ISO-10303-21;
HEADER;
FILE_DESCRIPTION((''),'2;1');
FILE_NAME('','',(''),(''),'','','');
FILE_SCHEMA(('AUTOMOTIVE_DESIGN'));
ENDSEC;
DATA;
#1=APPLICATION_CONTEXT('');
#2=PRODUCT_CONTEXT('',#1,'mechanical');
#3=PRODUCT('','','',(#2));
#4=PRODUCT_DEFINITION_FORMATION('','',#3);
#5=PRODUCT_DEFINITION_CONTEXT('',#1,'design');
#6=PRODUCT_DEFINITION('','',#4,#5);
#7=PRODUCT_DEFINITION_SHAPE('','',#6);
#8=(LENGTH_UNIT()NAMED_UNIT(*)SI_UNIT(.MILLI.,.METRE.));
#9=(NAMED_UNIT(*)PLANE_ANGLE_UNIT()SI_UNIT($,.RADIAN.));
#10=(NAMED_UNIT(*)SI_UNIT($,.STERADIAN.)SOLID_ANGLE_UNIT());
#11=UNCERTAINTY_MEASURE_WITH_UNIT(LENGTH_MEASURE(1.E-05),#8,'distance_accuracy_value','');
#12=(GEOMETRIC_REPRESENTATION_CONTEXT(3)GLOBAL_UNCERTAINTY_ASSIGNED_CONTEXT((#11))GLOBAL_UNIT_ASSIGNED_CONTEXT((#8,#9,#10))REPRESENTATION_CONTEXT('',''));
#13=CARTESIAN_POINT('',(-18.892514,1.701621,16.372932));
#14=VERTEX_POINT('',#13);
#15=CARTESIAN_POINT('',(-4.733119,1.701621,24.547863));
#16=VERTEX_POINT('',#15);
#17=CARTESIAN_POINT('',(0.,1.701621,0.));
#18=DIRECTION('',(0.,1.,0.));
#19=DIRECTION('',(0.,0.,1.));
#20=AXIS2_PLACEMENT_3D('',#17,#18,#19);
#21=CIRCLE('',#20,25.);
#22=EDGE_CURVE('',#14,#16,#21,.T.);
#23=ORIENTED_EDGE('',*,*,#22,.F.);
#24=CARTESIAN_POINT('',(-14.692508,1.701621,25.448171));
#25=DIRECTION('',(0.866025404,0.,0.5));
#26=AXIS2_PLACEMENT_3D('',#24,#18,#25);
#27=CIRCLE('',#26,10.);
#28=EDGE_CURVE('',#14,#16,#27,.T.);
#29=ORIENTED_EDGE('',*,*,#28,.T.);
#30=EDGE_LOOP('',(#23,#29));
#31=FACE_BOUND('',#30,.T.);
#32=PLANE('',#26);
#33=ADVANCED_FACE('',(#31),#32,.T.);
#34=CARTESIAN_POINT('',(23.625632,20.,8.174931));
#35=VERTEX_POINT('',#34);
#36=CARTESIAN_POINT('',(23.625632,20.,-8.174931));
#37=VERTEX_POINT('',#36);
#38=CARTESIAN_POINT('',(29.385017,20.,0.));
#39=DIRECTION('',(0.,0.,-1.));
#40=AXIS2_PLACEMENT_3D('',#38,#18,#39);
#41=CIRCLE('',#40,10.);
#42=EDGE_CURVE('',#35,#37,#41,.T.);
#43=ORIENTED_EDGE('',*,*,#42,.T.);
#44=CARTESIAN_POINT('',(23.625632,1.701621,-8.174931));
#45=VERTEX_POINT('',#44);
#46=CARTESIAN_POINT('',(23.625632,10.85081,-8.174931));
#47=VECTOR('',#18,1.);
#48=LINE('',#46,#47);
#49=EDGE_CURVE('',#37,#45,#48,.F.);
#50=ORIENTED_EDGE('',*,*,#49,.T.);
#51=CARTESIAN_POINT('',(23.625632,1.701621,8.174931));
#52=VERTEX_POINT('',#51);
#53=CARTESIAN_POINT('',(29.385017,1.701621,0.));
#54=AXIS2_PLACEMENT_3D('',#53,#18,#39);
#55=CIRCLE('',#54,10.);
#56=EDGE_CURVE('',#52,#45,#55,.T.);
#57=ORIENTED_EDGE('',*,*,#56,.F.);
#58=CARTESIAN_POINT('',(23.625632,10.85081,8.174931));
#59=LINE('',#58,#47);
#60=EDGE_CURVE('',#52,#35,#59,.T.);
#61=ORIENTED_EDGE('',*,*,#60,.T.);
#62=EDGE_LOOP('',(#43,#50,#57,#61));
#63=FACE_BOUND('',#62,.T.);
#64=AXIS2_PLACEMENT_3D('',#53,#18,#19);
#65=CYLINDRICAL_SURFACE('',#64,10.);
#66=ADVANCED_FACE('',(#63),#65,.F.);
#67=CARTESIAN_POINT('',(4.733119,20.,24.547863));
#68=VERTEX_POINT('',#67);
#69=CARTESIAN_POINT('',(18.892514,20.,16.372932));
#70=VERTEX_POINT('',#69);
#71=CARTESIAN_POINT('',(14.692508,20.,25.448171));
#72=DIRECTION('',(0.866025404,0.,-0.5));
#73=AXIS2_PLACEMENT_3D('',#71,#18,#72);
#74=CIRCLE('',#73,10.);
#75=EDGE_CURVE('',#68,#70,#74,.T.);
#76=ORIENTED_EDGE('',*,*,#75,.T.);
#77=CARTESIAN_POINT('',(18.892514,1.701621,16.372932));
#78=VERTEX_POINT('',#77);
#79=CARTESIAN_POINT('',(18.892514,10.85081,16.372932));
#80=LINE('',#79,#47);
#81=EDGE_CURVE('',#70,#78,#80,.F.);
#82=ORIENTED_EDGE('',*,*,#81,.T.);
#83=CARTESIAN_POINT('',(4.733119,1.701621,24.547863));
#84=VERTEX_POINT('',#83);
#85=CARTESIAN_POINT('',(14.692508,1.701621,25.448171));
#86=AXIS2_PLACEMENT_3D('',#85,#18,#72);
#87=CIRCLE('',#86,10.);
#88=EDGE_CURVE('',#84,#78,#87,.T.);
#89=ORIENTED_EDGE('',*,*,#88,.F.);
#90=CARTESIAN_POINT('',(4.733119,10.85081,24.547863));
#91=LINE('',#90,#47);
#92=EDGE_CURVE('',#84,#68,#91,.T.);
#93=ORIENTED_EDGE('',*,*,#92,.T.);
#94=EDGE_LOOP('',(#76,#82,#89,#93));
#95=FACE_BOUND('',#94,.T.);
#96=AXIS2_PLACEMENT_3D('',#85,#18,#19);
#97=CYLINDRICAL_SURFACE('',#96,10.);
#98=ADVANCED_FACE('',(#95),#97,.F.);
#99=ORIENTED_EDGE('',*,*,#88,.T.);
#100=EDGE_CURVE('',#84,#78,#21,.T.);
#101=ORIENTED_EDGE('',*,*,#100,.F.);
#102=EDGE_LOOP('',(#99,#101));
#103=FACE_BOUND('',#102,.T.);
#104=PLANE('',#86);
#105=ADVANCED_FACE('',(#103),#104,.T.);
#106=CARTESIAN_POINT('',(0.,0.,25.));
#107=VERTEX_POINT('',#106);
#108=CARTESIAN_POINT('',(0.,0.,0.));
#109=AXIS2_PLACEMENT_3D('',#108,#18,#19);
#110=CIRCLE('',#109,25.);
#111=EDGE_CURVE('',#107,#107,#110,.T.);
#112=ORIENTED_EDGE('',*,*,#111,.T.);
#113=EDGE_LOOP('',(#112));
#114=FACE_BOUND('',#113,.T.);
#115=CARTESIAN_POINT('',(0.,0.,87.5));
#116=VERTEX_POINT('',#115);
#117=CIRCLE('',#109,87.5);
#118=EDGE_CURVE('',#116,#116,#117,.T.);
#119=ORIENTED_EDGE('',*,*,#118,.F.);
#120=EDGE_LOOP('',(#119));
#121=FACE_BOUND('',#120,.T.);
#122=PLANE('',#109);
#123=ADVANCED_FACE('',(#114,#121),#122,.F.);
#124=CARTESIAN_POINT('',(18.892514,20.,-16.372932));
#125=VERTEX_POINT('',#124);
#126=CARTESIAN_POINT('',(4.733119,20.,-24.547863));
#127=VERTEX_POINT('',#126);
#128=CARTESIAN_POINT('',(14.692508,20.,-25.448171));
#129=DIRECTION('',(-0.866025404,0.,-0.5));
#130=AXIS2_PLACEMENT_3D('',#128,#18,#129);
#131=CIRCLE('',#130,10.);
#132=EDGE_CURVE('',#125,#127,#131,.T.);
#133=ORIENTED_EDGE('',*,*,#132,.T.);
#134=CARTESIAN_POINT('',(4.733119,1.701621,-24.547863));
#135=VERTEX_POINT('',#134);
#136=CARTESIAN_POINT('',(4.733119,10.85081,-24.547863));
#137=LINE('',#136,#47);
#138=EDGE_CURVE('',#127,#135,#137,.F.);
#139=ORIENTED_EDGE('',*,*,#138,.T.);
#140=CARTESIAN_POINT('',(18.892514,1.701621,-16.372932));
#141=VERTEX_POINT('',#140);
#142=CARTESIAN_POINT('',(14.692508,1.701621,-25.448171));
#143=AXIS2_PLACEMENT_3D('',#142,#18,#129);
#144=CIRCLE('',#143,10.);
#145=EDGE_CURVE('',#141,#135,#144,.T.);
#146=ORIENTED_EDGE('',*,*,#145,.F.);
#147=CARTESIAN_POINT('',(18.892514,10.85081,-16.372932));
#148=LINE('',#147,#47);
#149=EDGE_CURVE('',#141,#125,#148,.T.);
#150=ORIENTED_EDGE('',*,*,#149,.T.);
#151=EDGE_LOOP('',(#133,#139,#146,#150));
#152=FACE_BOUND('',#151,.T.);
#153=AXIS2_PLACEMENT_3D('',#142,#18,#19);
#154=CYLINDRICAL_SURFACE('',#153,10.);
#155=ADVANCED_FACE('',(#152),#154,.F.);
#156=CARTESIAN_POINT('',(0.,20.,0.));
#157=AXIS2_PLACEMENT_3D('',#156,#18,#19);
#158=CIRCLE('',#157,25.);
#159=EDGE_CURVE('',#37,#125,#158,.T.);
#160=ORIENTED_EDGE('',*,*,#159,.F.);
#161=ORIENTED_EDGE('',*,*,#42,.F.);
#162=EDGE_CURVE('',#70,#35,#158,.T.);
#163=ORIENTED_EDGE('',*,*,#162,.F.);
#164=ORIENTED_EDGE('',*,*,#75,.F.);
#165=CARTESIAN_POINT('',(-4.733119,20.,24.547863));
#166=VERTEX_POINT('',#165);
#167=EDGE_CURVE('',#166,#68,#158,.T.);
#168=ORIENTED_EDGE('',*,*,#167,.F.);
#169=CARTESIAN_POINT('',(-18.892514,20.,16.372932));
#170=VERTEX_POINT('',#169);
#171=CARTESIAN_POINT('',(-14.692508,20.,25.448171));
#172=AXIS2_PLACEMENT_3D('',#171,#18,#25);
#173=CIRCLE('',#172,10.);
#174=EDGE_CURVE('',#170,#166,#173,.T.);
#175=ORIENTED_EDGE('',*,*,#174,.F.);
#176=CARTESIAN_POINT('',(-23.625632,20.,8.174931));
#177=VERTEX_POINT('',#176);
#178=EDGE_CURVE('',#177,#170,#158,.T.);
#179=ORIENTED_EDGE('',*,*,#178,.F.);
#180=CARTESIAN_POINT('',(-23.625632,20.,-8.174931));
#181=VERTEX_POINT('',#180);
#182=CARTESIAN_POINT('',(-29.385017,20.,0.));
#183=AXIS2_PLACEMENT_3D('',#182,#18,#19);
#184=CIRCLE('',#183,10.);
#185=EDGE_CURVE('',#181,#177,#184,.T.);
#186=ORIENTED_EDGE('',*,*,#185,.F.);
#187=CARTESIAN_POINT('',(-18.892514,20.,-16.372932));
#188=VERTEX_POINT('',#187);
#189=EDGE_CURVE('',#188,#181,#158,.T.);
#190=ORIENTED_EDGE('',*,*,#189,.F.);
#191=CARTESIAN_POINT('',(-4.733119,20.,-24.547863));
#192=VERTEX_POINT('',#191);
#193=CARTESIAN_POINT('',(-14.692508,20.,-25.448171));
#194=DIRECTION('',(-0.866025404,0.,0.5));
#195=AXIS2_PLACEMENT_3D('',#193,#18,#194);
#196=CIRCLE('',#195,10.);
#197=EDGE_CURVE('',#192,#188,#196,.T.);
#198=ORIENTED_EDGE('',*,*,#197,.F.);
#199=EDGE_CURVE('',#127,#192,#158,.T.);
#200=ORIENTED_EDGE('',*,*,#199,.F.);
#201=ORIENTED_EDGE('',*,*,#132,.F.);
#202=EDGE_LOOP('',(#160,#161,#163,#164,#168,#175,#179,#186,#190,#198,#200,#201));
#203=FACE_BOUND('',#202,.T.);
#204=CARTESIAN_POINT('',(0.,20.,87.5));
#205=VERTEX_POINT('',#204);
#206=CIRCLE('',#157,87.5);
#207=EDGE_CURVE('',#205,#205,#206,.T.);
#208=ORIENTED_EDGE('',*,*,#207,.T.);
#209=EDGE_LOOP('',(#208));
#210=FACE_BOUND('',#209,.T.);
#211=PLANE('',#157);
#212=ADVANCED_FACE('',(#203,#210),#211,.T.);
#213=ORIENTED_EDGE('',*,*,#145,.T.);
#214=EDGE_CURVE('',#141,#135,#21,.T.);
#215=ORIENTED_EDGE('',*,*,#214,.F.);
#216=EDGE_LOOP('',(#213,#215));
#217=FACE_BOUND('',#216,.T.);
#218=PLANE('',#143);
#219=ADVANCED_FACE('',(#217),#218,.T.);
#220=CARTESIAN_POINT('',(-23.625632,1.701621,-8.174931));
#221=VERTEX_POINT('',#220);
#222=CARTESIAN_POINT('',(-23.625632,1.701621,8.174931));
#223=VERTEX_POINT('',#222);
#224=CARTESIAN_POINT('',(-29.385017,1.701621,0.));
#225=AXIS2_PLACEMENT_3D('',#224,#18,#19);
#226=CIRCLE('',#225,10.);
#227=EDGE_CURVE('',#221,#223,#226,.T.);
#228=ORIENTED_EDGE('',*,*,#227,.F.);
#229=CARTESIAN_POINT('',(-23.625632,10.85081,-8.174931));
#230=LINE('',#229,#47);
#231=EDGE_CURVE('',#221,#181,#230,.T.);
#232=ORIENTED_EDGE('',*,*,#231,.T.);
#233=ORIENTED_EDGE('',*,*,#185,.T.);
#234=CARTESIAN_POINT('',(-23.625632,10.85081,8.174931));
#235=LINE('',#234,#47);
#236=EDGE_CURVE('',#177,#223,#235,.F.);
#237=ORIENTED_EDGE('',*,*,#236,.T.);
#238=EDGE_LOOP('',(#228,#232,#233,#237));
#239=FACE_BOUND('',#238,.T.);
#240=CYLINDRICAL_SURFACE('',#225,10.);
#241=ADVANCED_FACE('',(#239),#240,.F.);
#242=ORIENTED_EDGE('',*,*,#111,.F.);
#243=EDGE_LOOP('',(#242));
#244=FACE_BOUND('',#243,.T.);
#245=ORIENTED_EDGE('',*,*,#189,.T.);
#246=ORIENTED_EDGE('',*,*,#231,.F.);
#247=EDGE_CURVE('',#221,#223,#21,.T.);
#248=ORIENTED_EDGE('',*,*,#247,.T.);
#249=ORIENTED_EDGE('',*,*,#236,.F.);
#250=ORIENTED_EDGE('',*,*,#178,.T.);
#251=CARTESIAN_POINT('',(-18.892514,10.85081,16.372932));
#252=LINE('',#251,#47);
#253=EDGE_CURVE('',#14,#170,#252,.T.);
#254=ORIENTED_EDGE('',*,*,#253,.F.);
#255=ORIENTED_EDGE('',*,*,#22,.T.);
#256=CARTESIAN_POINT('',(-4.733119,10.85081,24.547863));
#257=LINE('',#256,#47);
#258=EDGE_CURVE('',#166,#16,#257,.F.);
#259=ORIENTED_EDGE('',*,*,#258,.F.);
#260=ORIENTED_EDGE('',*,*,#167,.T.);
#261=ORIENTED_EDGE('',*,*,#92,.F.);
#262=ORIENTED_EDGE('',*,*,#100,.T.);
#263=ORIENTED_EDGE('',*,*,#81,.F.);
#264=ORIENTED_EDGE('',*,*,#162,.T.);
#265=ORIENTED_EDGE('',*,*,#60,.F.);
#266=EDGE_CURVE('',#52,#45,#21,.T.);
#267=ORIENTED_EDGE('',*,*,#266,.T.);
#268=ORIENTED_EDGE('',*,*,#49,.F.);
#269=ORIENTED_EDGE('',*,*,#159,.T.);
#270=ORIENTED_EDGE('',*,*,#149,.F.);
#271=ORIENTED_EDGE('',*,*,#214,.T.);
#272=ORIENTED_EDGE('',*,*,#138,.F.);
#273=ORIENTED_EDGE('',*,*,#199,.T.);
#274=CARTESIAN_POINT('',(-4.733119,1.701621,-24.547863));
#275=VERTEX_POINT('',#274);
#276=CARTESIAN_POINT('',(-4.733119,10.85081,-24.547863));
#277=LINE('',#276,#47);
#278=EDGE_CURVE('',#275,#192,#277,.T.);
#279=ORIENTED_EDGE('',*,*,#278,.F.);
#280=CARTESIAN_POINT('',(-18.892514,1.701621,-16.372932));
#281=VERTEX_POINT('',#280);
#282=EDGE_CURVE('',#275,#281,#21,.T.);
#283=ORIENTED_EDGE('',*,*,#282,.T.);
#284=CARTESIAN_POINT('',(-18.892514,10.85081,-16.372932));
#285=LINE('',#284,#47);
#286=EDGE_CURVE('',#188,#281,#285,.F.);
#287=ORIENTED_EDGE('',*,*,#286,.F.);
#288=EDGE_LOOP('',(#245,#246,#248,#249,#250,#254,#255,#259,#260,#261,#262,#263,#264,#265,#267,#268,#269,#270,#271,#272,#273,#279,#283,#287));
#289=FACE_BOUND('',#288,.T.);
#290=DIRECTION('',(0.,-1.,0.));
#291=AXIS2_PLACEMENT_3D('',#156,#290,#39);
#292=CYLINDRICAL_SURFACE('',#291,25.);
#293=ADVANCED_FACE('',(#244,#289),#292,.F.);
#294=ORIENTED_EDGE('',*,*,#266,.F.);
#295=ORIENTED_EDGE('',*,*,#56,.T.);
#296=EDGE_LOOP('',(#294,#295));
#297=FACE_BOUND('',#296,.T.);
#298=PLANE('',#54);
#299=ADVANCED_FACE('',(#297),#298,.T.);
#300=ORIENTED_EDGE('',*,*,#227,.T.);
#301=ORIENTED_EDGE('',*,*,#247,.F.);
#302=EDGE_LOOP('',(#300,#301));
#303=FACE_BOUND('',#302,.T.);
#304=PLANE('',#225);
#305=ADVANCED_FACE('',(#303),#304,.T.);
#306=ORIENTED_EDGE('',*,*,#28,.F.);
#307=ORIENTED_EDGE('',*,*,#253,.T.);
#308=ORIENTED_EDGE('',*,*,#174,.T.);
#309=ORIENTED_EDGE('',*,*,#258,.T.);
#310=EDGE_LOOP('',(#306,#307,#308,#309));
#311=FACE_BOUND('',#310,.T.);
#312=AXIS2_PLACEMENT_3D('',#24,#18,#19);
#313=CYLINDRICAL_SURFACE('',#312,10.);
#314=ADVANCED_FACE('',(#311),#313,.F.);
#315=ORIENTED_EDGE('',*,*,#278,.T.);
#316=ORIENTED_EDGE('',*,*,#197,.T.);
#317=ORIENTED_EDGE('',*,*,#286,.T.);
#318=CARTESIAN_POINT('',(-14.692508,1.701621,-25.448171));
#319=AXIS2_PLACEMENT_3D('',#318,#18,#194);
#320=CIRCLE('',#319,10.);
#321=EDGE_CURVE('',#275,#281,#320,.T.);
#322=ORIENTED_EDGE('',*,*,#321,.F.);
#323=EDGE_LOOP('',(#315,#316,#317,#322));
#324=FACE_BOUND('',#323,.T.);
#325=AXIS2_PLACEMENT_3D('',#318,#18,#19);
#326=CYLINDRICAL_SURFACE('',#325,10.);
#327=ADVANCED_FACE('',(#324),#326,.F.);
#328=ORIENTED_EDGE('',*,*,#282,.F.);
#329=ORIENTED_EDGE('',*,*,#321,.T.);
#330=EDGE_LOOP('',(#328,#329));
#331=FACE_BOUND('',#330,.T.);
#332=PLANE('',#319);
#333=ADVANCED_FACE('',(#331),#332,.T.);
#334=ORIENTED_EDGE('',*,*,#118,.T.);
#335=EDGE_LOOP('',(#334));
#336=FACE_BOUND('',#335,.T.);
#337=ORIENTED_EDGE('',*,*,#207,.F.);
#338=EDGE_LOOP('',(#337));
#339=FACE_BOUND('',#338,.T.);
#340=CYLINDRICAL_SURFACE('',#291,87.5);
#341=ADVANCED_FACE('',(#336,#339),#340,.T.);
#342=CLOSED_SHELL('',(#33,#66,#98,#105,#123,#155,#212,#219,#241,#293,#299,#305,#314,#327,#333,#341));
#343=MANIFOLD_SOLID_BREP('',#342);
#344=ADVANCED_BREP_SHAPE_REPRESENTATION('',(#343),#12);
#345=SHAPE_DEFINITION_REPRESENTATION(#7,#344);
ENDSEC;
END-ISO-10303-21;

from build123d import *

# Parameters (mm, degrees)
SKETCH1_R           = 87.5
BOSS_EXTRUDE1_DEPTH = 20
SKETCH2_R           = 25
CUT_EXTRUDE1_DEPTH  = 126.349511367
SKETCH3_R           = 10
CUT_EXTRUDE2_DEPTH  = 18.298379086
CIRPATTERN1_COUNT   = 6


with BuildPart() as part:
    # Sketch1 → Boss-Extrude1 (new body)
    with BuildSketch(Plane(origin=(0, 0, 0), x_dir=(1, 0, 0), z_dir=(0, 1, 0))):
        Circle(SKETCH1_R)
    extrude(amount=BOSS_EXTRUDE1_DEPTH)

    # Sketch2 → Cut-Extrude1 (cut, through all)
    with BuildSketch(Plane(origin=(0, 0, 0), x_dir=(1, 0, 0), z_dir=(0, 1, 0))):
        Circle(SKETCH2_R)
    extrude(amount=CUT_EXTRUDE1_DEPTH, mode=Mode.SUBTRACT)

    # Sketch3 → Cut-Extrude2 (cut)
    with BuildSketch(Plane(origin=(0, 20, 0), x_dir=(1, 0, 0), z_dir=(0, 1, 0))):
        with Locations((-29.38501669, 0)):
            Circle(SKETCH3_R)
    cut_extrude2 = extrude(amount=-CUT_EXTRUDE2_DEPTH, mode=Mode.SUBTRACT)

    # CirPattern1: Cut-Extrude2 ×6 about axis
    cirpattern1_axis = Axis((0, 0, 0), (0, 1, 0))
    for i in range(1, CIRPATTERN1_COUNT):
        add(cut_extrude2.rotate(cirpattern1_axis, i * 360 / CIRPATTERN1_COUNT), mode=Mode.SUBTRACT)


solid = part.part
